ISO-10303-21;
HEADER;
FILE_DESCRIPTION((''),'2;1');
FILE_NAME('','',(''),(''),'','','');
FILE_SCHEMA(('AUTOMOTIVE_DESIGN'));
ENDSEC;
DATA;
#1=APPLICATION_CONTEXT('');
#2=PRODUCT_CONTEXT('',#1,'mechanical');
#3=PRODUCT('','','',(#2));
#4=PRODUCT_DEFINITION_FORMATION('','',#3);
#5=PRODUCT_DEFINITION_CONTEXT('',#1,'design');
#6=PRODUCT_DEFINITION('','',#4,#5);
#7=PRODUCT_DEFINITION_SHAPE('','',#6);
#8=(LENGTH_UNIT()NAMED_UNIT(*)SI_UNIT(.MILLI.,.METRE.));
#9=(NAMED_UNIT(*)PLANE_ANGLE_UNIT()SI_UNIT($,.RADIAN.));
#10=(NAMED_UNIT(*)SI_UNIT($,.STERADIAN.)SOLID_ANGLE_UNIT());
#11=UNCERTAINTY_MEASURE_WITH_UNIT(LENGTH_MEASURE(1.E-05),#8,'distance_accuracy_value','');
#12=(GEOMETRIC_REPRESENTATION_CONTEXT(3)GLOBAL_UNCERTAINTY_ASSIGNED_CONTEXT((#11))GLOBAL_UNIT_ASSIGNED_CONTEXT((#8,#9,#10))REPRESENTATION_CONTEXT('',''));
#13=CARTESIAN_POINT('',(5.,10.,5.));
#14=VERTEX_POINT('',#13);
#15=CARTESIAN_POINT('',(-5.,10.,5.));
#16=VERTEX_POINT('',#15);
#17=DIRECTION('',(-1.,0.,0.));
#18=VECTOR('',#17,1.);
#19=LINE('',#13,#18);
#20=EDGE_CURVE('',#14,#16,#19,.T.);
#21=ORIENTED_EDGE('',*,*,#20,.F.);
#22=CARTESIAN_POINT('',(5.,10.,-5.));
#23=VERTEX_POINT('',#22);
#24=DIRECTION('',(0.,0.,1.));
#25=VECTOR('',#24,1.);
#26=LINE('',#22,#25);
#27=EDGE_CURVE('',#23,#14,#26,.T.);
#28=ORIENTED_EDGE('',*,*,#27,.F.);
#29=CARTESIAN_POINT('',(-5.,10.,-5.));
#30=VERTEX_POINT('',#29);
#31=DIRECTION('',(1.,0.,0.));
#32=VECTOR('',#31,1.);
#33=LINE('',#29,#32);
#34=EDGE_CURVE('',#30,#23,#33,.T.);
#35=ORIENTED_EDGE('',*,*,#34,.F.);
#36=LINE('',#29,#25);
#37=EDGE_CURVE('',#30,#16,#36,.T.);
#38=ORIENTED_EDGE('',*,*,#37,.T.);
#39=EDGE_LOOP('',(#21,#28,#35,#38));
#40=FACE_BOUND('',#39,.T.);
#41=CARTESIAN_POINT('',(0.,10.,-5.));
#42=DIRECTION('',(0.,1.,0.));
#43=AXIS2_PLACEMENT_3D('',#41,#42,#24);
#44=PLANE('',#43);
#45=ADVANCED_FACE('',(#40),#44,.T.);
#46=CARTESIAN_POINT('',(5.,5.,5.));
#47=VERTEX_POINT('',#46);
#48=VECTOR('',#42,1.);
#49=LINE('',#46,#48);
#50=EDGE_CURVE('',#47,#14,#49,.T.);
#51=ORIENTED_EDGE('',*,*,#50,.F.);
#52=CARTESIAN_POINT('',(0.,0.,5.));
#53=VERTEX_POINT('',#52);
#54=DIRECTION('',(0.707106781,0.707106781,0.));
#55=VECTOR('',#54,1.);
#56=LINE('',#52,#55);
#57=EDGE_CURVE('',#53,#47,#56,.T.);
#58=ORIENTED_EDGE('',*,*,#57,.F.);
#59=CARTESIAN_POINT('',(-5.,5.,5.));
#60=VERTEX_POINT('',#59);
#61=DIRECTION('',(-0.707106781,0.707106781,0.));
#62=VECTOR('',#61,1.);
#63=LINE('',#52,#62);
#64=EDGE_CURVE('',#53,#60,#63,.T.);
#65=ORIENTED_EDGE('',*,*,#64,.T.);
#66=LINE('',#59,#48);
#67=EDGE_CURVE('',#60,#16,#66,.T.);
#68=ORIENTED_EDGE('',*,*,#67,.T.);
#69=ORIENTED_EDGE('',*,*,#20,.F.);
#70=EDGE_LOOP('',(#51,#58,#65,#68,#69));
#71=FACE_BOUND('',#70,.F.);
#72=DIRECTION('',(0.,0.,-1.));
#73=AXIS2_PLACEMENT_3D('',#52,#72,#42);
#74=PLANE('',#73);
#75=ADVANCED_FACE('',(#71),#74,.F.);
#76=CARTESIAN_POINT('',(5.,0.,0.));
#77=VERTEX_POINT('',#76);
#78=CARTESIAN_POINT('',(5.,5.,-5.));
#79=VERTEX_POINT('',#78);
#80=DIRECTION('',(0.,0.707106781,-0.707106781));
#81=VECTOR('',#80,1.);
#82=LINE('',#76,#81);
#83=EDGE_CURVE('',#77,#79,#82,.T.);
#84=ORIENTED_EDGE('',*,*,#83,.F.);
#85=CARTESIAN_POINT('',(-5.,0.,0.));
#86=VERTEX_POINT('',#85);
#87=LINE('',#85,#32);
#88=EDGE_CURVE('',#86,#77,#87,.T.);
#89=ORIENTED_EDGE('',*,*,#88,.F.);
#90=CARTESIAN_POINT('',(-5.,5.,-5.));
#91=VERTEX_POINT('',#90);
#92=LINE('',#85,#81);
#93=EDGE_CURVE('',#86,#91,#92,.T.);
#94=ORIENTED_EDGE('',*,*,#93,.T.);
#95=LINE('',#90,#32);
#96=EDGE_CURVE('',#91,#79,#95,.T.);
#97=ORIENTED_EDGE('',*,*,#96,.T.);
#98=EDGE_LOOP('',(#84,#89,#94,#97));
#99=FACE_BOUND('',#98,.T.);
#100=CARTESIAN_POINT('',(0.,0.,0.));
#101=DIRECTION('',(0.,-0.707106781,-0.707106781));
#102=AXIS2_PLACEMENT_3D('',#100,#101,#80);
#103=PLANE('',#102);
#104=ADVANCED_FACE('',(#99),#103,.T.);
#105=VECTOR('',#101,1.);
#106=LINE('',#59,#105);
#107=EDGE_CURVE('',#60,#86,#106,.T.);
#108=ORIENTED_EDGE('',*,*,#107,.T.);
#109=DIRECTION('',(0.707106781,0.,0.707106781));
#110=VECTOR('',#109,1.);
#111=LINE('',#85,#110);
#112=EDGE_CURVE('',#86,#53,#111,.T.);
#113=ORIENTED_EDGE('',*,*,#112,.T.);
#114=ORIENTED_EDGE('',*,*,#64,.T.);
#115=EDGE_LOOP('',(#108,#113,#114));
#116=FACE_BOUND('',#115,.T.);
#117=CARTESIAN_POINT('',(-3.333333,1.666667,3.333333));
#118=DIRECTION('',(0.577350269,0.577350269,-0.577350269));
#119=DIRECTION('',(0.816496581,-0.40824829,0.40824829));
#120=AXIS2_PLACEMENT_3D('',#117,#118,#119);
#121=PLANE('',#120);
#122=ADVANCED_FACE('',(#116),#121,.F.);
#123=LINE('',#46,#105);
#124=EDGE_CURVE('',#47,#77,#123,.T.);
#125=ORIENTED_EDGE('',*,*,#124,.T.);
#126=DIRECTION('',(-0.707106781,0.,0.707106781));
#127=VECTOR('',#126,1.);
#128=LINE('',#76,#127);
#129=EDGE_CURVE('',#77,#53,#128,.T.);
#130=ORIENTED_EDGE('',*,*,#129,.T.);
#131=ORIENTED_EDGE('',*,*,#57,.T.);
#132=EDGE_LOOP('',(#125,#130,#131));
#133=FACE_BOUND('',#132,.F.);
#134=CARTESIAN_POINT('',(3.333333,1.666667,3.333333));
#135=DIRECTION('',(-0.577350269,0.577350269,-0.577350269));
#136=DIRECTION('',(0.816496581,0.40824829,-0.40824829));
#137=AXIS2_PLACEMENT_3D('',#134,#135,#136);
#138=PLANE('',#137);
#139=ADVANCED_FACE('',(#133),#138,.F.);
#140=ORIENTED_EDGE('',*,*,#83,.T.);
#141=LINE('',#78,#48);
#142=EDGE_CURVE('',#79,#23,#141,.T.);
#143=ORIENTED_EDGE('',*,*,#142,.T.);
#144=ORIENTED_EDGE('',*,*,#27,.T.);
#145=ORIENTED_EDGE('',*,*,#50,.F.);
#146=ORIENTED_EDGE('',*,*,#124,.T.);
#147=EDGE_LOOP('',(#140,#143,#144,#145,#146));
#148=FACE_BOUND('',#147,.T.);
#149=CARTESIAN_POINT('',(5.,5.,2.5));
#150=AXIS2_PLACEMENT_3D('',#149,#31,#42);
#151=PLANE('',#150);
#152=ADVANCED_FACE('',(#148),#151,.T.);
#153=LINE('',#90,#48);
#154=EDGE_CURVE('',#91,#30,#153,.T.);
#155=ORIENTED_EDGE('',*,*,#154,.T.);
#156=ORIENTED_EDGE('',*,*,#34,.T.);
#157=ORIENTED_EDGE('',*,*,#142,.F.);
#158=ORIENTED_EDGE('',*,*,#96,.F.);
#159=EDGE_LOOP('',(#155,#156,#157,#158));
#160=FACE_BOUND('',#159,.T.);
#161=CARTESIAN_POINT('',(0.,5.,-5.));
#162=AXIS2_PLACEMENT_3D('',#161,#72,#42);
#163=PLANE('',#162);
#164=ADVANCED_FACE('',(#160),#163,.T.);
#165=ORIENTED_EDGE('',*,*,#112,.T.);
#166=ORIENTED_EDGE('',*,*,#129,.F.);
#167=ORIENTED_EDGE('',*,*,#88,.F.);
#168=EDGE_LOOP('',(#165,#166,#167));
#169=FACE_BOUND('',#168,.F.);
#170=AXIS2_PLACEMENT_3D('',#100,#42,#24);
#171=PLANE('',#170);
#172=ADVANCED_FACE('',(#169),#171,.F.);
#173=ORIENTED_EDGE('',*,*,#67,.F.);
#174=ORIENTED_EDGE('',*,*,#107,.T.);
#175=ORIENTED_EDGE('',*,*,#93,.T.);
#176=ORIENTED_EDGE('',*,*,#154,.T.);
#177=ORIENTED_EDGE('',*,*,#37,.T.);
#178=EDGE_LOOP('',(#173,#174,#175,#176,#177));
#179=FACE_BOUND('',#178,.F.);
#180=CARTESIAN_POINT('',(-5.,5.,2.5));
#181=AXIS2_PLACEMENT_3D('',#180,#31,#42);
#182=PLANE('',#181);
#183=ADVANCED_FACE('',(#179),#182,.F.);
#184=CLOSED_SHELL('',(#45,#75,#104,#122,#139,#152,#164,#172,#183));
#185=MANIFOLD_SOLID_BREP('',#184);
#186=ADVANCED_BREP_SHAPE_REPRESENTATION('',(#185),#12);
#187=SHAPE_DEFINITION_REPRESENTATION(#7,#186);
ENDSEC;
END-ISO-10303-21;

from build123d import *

# Parameters (mm, degrees)
F0_W     = 10
F0_H     = 5
F1_DEPTH = 5
F6_DEPTH = 2.8877513459


# Not quite as in the source:
# - a pattern or mirror of a feature is missing from the dataset's text; its kind, count and spacing are read off the source's solid


with BuildPart() as f1:
    # F0 (on Right) → F1 (new body, symmetric)
    with BuildSketch(Plane.YZ):
        with Locations((5, 2.5)):
            Rectangle(F0_W, F0_H)
        Polygon((10, 0), (0, 0), (5, -5), (10, -5), align=None)
    extrude(amount=F1_DEPTH, both=True)

    # F5 (on 3pt) → F6 (cut, through all)
    with BuildSketch(Plane(origin=(1.6666666667, -1.6666666667, 1.6666666667), x_dir=(0.8164965809, 0.4082482905, -0.4082482905), z_dir=(-0.5773502692, 0.5773502692, -0.5773502692))):
        Polygon((4.0824829046, 0), (-2.0412414523, -3.5355339059), (4.0824829046, -7.0710678119), align=None)
    f6 = extrude(amount=-F6_DEPTH, mode=Mode.SUBTRACT)

    # F6_copies: F6 across plane
    add(f6.mirror(Plane(origin=(0, 0, 0), x_dir=(0, 0, -1), z_dir=(-1, 0, 0))), mode=Mode.SUBTRACT)


solid = f1.part
